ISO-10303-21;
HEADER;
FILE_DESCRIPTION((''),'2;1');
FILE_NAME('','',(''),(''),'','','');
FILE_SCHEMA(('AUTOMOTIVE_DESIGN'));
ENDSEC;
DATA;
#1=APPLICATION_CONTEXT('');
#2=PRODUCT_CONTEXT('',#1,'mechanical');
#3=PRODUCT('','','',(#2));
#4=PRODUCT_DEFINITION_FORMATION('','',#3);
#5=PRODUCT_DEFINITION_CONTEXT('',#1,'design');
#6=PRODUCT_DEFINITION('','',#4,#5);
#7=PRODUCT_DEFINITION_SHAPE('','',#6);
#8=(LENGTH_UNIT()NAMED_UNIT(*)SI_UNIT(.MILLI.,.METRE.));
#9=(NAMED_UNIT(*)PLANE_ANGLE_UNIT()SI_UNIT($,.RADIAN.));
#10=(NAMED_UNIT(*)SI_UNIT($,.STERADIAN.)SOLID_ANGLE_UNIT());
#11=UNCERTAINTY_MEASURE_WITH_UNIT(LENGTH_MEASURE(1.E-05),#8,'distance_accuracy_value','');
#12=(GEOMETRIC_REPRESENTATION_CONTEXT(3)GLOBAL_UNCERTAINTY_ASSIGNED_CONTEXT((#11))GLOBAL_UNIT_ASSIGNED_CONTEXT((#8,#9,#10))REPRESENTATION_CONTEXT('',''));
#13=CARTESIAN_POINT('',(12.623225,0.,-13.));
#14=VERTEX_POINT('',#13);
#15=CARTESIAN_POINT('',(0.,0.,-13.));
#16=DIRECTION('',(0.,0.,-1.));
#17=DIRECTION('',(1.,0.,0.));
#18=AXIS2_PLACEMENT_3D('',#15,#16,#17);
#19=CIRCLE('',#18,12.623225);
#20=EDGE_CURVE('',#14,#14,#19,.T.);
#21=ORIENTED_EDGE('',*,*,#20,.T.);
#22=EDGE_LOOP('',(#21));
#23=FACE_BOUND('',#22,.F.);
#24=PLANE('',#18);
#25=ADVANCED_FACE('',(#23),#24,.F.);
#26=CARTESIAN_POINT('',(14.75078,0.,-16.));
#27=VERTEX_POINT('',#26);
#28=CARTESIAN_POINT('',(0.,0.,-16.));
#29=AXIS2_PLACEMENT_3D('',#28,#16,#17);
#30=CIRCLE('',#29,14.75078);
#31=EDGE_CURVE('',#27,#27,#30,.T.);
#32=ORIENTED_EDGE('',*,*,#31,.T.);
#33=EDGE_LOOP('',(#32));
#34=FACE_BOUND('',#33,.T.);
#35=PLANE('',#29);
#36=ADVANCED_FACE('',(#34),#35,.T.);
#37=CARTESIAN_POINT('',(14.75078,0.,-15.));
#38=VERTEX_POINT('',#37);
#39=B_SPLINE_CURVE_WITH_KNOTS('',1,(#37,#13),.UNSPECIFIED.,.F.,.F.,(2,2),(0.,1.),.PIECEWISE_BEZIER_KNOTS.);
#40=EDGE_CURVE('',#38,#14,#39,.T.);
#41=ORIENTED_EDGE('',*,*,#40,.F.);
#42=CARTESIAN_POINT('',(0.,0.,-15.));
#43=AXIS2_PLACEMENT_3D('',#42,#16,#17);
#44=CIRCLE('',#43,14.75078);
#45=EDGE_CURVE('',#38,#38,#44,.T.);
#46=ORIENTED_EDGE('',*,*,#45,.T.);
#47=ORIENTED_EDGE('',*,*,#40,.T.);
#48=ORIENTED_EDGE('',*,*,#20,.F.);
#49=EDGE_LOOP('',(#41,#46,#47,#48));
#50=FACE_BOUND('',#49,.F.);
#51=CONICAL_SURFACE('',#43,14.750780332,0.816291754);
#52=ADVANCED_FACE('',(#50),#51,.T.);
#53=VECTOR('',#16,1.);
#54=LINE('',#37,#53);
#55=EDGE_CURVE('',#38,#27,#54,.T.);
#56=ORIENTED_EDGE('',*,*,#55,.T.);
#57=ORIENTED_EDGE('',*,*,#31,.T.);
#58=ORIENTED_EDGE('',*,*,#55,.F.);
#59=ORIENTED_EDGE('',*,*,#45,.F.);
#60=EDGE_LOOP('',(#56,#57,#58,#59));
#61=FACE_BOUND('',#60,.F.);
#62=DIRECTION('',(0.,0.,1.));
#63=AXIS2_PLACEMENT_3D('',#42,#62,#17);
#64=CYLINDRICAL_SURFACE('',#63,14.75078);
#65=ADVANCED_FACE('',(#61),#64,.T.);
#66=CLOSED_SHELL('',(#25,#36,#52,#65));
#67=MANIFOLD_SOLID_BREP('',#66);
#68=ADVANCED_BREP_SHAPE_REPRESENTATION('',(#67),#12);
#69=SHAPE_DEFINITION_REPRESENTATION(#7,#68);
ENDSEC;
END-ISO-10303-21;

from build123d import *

# Parameters (mm, degrees)
F3_R     = 14.7507803317
F4_DEPTH = 1
F7_R     = 12.623224735


# Not quite as in the source:
# - the program builds the solid bodies; features that only make, move or delete a surface that nothing else refers to are left out


with BuildPart() as f4:
    # F3 (on face) → F4 (new body)
    with BuildSketch(Plane(origin=(0, 0, -15), x_dir=(1, 0, 0), z_dir=(0, 0, -1))):
        Circle(F3_R)
    extrude(amount=F4_DEPTH)

    # F3 (on face) → F8 section 0
    with BuildSketch(Plane(origin=(0, 0, -15), x_dir=(1, 0, 0), z_dir=(0, 0, -1))):
        Circle(F3_R)
    # F7 (on offset) → F8 section 1
    with BuildSketch(Plane(origin=(0, 0, -13), x_dir=(1, 0, 0), z_dir=(0, 0, -1))):
        Circle(F7_R)
    loft()


solid = f4.part
